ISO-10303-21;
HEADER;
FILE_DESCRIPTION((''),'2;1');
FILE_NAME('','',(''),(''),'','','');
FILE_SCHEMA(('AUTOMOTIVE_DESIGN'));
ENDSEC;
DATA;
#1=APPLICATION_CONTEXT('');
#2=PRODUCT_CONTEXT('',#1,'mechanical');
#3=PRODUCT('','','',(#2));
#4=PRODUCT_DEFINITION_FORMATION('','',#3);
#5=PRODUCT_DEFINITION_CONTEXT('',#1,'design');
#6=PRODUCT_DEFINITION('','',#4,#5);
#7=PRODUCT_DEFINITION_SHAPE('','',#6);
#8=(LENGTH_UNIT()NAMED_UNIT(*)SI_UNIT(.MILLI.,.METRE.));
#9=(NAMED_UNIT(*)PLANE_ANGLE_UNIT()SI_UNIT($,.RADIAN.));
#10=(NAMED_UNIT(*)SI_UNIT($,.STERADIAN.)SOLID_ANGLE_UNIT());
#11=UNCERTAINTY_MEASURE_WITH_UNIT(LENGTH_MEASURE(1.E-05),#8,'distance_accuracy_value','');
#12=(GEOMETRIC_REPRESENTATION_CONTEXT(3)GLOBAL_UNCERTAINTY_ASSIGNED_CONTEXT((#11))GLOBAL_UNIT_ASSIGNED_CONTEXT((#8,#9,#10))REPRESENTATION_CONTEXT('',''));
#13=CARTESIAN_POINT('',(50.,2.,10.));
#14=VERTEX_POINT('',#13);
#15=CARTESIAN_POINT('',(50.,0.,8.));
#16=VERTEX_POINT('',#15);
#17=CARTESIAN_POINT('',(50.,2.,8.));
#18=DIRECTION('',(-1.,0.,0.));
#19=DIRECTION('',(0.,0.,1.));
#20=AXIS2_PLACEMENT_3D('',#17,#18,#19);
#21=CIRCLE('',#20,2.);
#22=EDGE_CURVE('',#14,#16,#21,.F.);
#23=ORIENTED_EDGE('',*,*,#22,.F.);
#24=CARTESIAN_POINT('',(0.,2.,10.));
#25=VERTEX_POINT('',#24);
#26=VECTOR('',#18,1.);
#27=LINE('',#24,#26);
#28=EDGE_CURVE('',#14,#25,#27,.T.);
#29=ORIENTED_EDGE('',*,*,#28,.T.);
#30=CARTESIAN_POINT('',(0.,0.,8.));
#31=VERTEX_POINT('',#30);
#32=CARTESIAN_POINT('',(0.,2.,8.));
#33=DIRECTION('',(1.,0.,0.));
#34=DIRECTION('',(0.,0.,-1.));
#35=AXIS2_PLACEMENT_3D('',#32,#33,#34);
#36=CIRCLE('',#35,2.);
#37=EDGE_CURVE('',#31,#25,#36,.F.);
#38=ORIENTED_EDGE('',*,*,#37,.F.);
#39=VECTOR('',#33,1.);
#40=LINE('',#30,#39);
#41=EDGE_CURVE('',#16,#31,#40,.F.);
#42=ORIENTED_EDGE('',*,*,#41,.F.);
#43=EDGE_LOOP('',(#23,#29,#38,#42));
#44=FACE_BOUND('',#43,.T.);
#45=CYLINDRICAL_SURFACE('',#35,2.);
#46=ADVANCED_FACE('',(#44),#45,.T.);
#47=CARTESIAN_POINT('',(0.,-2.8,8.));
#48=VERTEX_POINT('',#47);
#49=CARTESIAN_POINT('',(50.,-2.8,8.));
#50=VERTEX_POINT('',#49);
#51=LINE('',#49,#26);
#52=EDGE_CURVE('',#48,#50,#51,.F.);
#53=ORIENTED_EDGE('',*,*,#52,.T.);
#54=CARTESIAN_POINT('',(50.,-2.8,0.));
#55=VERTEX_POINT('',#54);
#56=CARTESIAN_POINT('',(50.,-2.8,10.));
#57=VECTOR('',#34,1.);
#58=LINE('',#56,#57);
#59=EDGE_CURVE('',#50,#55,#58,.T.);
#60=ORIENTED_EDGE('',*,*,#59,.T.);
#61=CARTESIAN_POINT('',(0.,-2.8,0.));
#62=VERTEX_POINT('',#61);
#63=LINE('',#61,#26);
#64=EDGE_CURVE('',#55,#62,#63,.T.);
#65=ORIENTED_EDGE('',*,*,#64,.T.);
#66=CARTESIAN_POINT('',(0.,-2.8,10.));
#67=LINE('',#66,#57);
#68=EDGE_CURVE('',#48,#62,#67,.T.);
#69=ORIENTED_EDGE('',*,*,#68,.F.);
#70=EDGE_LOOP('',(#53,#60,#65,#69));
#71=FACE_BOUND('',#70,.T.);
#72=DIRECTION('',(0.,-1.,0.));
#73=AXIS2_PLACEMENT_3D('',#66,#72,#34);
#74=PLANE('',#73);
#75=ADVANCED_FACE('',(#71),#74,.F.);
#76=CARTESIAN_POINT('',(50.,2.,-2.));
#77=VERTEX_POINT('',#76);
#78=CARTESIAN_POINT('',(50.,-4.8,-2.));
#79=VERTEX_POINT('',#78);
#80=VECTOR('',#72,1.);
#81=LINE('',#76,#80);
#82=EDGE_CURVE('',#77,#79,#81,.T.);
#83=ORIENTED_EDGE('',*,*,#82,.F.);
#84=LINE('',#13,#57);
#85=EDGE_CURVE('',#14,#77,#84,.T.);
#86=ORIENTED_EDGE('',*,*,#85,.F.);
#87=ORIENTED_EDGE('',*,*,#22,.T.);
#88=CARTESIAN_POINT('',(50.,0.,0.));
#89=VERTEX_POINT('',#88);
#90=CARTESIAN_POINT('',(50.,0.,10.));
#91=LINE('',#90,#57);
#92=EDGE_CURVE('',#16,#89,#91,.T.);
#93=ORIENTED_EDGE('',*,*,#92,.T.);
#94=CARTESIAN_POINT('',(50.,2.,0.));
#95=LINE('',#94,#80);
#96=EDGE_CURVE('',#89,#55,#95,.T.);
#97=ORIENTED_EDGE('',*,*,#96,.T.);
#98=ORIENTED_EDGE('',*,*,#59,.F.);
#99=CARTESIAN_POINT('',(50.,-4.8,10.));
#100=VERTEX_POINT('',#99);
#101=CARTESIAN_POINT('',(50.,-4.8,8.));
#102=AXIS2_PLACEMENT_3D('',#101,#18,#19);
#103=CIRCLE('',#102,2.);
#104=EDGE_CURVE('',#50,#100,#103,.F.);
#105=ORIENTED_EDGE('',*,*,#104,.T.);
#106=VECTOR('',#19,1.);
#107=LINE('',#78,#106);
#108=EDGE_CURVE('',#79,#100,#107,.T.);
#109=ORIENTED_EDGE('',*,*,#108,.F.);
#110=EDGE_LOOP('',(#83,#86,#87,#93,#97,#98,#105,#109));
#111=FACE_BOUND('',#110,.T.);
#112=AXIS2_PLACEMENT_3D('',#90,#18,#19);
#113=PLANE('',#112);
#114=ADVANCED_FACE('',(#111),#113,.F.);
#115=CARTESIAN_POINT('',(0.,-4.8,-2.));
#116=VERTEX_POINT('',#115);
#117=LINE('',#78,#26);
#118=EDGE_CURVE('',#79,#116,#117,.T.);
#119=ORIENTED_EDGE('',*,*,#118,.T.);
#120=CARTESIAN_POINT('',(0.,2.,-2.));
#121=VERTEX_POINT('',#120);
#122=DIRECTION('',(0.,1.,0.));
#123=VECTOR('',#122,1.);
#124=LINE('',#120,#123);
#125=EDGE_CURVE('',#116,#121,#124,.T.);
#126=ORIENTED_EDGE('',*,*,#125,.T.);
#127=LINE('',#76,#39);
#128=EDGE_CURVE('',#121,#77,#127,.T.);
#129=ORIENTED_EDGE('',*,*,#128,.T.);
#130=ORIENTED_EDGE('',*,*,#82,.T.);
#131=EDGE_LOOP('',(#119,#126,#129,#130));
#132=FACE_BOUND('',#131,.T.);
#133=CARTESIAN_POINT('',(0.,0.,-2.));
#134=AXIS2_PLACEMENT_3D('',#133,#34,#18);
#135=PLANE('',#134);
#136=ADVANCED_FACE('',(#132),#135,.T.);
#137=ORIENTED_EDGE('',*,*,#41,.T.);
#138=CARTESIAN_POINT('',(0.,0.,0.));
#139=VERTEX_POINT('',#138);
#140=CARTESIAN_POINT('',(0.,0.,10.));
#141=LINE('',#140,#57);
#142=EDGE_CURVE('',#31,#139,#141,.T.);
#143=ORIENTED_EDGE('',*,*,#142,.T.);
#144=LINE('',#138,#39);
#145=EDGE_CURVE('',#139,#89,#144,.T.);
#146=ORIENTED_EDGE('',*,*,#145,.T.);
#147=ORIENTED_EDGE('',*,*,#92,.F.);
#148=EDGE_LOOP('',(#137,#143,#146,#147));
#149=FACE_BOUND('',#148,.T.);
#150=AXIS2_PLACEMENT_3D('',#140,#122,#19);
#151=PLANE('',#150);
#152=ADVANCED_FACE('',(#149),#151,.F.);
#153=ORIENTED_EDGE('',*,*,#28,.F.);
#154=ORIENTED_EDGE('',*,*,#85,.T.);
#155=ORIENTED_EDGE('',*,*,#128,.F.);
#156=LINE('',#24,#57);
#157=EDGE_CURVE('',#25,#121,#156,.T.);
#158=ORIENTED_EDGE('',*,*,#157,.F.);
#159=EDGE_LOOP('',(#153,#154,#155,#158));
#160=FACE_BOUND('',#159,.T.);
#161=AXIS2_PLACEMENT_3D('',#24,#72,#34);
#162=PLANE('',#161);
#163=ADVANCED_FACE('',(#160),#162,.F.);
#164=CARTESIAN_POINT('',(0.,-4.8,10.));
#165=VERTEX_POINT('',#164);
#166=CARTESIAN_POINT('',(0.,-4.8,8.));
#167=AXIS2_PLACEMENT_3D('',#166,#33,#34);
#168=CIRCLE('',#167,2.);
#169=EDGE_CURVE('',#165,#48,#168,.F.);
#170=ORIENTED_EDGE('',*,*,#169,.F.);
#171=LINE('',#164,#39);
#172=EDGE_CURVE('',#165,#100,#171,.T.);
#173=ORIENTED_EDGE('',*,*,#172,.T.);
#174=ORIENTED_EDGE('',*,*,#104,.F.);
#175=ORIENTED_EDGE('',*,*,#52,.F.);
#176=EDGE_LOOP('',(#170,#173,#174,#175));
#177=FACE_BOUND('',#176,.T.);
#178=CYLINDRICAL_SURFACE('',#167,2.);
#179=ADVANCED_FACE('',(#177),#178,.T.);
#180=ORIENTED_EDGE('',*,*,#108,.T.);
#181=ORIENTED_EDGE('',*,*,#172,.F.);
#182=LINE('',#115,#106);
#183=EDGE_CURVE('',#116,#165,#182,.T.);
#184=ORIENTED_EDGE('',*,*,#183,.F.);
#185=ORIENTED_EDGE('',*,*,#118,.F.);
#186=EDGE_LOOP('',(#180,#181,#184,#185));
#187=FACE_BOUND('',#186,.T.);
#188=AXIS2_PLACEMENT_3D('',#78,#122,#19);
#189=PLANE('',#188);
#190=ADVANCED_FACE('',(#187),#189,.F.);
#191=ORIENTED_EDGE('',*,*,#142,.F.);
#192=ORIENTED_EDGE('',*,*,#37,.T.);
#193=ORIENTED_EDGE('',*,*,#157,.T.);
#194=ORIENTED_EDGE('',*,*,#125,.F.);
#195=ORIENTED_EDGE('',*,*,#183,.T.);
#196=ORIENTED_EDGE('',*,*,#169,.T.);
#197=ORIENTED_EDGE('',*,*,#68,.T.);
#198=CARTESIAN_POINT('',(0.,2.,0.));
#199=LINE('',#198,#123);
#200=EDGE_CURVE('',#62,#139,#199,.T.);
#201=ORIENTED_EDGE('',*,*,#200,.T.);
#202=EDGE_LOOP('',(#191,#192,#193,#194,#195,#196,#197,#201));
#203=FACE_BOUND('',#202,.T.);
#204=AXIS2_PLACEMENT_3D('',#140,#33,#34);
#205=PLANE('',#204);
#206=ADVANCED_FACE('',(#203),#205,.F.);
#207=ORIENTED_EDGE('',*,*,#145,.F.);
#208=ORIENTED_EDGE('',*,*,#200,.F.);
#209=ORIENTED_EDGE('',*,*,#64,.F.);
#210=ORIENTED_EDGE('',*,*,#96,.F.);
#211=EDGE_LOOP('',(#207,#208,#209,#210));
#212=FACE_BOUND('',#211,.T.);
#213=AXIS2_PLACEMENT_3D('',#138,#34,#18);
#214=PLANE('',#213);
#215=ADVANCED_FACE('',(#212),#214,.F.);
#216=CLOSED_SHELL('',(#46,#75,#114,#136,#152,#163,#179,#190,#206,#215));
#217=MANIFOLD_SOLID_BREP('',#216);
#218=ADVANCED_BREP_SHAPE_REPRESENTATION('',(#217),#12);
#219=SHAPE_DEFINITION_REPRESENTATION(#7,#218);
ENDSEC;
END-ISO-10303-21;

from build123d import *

# Parameters (mm, degrees)
SKETCH_1_W        = 50
SKETCH_1_H        = 2
EXTRUDE_1_DEPTH   = 10
EXTRUDE_1_2_DEPTH = 10
SKETCH_2_W        = 50
SKETCH_2_H        = 6.8
EXTRUDE_2_DEPTH   = 2
FILLET_1_R        = 2


with BuildPart() as part:
    # 草图1 → 凸台-拉伸1 (new body)
    with BuildSketch(Plane.XY):
        with Locations((25, 1)):
            Rectangle(SKETCH_1_W, SKETCH_1_H)
    extrude(amount=EXTRUDE_1_DEPTH)



with BuildPart() as body_2:
    # 草图1 → Extrude 1 2 (new body)
    with BuildSketch(Plane.XY):
        with Locations((25, -3.8)):
            Rectangle(SKETCH_1_W, SKETCH_1_H)
    extrude(amount=EXTRUDE_1_2_DEPTH)


with BuildPart() as part_1:
    add(part.part)

    add(body_2.part)  # 凸台-拉伸2 merges body 2
    # 草图2 → 凸台-拉伸2 (add)
    with BuildSketch(Plane(origin=(0, 0, 0), x_dir=(-1, 0, 0), z_dir=(0, 0, -1))):
        with Locations((-25, -1.4)):
            Rectangle(SKETCH_2_W, SKETCH_2_H)
    extrude(amount=EXTRUDE_2_DEPTH)

    # 圆角1
    fillet_1_edges = [part_1.edges().sort_by_distance(p)[0] for p in [
        (25, -2.8, 10),
        (25, 0, 10),
    ]]
    fillet(fillet_1_edges, radius=FILLET_1_R - 0.0001)  # a hair under: the kernel refuses the full size


solid = part_1.part
